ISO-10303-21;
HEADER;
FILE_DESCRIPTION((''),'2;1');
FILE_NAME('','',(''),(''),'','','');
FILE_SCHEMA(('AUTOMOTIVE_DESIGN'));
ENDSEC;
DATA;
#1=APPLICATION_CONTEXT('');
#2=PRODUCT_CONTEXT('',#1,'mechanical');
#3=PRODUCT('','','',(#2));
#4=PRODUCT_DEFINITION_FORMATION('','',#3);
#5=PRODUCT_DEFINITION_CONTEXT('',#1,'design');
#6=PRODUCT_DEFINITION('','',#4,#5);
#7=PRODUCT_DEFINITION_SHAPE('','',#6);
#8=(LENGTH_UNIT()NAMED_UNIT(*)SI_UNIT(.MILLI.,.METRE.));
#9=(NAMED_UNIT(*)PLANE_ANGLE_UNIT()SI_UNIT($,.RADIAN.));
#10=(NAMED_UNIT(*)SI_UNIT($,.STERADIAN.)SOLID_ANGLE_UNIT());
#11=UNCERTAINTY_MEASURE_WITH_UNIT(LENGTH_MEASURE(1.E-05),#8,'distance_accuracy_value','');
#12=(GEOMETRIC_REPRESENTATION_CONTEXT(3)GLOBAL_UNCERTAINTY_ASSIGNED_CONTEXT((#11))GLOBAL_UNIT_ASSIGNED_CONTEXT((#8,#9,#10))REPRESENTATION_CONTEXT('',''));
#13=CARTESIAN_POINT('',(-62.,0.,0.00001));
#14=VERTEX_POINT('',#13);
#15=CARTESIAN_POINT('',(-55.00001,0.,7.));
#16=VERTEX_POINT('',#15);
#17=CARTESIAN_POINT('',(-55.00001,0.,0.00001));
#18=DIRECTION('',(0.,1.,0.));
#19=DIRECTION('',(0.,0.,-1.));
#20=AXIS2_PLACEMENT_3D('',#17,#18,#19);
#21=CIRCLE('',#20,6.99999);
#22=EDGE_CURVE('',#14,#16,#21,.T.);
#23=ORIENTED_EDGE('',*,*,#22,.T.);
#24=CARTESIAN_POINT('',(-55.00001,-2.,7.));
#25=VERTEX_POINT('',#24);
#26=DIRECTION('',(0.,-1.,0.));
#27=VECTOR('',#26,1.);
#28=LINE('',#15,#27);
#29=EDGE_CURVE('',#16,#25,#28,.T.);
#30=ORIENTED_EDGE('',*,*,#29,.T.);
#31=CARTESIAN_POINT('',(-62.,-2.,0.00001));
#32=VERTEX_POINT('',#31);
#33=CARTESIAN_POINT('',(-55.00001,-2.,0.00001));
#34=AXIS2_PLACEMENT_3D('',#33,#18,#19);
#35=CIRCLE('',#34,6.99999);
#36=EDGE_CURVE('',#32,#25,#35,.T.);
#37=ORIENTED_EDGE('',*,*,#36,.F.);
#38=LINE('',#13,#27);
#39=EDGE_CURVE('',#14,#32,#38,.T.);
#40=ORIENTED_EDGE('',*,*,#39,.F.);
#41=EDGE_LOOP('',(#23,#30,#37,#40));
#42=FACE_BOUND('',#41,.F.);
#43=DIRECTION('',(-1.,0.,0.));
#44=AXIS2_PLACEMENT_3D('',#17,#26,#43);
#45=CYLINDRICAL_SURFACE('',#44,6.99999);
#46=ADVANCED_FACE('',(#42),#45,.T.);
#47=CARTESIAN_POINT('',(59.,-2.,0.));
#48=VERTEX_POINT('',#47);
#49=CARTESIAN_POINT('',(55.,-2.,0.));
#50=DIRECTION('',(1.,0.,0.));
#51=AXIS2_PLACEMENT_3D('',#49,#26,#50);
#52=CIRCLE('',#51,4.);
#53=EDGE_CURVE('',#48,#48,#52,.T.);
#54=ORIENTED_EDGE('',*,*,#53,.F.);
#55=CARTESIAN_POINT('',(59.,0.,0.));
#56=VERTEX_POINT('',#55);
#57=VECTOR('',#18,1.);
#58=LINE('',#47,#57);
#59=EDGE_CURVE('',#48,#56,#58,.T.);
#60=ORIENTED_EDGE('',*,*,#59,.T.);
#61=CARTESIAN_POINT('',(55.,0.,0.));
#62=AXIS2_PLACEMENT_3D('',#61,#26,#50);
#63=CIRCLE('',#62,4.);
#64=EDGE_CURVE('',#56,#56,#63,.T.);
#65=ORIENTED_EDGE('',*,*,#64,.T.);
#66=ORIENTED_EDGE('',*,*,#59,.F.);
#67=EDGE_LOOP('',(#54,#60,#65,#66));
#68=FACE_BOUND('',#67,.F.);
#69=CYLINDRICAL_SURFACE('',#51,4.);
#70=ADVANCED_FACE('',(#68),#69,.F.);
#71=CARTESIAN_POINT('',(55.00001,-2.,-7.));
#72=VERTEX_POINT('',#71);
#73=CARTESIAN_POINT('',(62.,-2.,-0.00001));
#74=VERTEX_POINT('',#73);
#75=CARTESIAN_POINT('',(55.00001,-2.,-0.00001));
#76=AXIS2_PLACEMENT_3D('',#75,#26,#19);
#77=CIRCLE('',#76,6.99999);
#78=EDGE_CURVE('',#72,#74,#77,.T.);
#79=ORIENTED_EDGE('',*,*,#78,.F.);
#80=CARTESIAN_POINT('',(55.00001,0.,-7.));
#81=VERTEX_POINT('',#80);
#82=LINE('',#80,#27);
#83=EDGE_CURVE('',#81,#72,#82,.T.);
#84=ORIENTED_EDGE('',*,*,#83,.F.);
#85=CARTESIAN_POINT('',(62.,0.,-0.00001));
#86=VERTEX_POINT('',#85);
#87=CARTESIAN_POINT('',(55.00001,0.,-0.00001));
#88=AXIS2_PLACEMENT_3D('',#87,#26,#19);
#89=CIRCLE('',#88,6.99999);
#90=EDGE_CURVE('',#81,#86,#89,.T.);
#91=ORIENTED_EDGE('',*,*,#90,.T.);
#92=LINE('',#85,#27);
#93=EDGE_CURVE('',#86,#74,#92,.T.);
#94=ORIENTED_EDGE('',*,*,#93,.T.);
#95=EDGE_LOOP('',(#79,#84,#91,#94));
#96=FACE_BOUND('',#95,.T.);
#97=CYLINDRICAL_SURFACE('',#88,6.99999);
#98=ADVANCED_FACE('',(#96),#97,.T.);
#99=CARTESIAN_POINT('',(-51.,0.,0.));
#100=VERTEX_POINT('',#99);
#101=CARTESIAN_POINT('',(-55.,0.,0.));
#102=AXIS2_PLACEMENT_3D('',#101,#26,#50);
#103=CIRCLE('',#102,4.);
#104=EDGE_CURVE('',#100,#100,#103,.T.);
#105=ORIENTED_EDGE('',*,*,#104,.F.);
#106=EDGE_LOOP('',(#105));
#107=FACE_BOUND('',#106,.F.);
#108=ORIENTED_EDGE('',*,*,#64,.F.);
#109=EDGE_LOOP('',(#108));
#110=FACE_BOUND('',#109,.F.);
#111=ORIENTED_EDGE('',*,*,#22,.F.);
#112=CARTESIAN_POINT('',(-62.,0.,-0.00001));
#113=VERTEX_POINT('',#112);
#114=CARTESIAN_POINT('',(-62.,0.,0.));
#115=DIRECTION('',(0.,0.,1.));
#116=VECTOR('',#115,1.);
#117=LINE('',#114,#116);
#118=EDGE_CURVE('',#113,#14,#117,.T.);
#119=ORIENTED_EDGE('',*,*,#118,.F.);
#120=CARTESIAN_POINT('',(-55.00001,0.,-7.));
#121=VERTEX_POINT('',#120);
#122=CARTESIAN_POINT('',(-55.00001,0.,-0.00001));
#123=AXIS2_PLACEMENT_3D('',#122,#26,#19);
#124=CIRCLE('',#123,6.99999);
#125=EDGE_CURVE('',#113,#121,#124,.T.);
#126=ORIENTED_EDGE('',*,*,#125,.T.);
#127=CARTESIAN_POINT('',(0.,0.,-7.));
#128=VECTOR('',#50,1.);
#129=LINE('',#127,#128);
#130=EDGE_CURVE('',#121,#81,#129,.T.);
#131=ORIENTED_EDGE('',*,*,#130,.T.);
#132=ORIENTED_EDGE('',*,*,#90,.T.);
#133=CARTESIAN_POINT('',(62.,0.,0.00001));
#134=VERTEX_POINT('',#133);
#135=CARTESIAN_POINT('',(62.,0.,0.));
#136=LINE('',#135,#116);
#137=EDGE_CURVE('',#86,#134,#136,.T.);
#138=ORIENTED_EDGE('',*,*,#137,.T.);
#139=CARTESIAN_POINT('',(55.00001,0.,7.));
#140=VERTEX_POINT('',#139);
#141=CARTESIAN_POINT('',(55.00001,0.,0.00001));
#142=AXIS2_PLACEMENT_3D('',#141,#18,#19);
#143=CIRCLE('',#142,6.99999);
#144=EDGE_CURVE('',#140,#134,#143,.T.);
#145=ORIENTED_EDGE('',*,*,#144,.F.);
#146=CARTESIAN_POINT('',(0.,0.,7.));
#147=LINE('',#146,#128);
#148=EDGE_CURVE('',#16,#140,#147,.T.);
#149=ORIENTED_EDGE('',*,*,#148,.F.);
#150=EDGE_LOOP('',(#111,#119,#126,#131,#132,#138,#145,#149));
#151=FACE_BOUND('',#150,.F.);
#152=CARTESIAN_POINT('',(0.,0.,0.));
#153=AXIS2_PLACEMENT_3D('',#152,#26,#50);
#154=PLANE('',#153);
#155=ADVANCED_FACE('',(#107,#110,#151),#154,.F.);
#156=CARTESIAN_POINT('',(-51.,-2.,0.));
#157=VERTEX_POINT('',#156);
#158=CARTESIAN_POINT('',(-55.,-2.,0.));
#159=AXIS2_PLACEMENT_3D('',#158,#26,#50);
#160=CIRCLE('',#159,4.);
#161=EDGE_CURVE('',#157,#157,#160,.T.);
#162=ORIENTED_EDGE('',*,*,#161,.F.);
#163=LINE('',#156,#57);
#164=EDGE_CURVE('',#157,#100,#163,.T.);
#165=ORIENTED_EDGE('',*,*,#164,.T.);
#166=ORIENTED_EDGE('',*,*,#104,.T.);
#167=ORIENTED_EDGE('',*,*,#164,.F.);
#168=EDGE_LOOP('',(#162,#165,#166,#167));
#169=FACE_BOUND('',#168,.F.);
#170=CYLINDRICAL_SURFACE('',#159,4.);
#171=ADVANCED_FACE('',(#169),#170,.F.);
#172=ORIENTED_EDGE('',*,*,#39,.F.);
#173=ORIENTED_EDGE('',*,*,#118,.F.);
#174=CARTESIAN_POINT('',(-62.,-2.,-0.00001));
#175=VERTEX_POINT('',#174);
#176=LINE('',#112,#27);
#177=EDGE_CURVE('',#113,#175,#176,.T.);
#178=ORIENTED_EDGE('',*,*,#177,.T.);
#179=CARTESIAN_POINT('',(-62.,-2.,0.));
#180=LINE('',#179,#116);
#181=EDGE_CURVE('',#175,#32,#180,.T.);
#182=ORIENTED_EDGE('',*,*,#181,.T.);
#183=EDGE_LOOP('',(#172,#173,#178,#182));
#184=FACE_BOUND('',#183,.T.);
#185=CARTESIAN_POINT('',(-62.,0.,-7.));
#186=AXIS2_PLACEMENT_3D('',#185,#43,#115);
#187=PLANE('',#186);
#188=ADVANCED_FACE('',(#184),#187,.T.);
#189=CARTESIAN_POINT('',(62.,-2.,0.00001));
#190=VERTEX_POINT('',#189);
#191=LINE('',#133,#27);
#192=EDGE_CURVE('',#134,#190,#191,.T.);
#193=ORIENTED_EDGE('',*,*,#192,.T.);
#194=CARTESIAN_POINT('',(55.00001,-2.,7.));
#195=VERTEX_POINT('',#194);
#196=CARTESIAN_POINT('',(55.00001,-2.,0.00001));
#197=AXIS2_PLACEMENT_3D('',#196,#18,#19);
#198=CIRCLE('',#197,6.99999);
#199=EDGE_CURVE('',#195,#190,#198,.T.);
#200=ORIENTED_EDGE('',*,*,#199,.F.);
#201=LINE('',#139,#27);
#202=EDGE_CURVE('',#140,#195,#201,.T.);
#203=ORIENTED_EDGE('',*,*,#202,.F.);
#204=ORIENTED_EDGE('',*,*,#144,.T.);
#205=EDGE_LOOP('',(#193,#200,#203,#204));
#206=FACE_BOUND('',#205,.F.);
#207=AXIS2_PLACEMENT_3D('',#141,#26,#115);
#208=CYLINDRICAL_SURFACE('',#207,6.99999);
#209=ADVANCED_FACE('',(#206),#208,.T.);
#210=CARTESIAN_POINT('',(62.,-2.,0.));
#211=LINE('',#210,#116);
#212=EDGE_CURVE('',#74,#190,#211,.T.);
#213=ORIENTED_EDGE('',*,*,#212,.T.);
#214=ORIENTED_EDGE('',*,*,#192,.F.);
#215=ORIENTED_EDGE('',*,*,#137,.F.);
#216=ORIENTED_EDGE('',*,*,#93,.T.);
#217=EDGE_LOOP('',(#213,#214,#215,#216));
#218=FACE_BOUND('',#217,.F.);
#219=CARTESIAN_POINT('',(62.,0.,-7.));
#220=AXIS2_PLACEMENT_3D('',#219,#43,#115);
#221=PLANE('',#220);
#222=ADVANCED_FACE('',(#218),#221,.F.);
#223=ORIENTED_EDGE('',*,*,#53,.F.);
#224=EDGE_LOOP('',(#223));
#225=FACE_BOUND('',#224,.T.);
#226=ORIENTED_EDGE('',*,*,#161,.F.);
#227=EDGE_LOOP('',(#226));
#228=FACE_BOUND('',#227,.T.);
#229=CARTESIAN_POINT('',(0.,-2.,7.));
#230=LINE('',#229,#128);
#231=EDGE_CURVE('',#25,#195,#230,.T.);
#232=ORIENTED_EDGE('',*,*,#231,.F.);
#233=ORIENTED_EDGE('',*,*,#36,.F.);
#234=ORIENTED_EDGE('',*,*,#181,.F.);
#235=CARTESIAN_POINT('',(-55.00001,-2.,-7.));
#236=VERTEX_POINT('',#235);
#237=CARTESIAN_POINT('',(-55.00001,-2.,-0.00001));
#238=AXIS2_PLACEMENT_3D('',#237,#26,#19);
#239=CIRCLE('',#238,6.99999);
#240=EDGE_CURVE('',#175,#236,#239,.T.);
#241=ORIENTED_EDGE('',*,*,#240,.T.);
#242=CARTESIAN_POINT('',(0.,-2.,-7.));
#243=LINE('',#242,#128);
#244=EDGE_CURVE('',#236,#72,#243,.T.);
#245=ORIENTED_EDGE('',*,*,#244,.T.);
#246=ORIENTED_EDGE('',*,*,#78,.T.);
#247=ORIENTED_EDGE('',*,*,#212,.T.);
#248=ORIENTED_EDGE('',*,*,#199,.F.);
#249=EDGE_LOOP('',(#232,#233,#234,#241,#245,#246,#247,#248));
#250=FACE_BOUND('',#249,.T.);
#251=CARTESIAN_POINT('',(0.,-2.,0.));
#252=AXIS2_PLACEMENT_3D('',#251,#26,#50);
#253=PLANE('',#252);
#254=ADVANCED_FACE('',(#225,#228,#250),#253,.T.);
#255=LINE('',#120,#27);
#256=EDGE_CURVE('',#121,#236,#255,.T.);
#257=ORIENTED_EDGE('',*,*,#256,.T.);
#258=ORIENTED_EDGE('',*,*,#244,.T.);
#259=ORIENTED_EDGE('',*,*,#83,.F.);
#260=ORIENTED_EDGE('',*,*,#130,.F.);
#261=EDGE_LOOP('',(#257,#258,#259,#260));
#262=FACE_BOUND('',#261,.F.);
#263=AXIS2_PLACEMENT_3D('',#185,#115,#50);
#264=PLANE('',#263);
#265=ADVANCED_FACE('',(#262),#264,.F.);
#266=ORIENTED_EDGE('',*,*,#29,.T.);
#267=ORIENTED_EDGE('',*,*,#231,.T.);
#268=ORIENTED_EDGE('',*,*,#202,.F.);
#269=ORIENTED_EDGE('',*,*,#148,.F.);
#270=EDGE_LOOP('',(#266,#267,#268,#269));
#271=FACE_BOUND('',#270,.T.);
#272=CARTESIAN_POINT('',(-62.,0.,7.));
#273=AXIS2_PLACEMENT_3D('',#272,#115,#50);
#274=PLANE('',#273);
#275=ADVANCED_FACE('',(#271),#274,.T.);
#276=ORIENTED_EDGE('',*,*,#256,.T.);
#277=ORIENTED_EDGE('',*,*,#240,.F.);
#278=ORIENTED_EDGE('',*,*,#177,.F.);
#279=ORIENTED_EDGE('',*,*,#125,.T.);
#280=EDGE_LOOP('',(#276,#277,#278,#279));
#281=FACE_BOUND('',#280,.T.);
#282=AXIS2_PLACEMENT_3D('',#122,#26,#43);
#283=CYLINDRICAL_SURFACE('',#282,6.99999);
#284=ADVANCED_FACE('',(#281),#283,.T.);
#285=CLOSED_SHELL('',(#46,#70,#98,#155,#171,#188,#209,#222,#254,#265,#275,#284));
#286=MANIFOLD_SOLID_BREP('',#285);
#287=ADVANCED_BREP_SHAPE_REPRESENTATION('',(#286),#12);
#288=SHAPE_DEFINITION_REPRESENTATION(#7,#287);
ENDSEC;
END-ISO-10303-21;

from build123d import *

# Parameters (mm, degrees)
F0_W     = 124
F0_H     = 14
F1_DEPTH = 2
F2_R     = 4
F3_DEPTH = 25
F4_R     = 4
F5_DEPTH = 25
F6_R     = 6.99999


# Not quite as in the source:
# - a fillet or chamfer is up to 0.001 mm smaller than in the source, because OpenCascade refuses the exact size


with BuildPart() as f1:
    # F0 (on Front) → F1 (new body)
    with BuildSketch(Plane.XZ):
        Rectangle(F0_W, F0_H)
    extrude(amount=F1_DEPTH)

    # F2 (on face) → F3 (cut)
    with BuildSketch(Plane.XZ.offset(2)):
        with Locations((-55, 0)):
            Circle(F2_R)
    extrude(amount=-F3_DEPTH, mode=Mode.SUBTRACT)

    # F4 (on face) → F5 (cut)
    with BuildSketch(Plane.XZ.offset(2)):
        with Locations((55, 0)):
            Circle(F4_R)
    extrude(amount=-F5_DEPTH, mode=Mode.SUBTRACT)

    # F6 (radius 7 in the source; OpenCascade refuses exactly that, so slightly less here)
    f6_edges = [f1.edges().sort_by_distance(p)[0] for p in [
        (-62, -1, 7),
        (-62, -1, -7),
        (62, -1, 7),
        (62, -1, -7),
    ]]
    fillet(f6_edges, radius=F6_R)


solid = f1.part
